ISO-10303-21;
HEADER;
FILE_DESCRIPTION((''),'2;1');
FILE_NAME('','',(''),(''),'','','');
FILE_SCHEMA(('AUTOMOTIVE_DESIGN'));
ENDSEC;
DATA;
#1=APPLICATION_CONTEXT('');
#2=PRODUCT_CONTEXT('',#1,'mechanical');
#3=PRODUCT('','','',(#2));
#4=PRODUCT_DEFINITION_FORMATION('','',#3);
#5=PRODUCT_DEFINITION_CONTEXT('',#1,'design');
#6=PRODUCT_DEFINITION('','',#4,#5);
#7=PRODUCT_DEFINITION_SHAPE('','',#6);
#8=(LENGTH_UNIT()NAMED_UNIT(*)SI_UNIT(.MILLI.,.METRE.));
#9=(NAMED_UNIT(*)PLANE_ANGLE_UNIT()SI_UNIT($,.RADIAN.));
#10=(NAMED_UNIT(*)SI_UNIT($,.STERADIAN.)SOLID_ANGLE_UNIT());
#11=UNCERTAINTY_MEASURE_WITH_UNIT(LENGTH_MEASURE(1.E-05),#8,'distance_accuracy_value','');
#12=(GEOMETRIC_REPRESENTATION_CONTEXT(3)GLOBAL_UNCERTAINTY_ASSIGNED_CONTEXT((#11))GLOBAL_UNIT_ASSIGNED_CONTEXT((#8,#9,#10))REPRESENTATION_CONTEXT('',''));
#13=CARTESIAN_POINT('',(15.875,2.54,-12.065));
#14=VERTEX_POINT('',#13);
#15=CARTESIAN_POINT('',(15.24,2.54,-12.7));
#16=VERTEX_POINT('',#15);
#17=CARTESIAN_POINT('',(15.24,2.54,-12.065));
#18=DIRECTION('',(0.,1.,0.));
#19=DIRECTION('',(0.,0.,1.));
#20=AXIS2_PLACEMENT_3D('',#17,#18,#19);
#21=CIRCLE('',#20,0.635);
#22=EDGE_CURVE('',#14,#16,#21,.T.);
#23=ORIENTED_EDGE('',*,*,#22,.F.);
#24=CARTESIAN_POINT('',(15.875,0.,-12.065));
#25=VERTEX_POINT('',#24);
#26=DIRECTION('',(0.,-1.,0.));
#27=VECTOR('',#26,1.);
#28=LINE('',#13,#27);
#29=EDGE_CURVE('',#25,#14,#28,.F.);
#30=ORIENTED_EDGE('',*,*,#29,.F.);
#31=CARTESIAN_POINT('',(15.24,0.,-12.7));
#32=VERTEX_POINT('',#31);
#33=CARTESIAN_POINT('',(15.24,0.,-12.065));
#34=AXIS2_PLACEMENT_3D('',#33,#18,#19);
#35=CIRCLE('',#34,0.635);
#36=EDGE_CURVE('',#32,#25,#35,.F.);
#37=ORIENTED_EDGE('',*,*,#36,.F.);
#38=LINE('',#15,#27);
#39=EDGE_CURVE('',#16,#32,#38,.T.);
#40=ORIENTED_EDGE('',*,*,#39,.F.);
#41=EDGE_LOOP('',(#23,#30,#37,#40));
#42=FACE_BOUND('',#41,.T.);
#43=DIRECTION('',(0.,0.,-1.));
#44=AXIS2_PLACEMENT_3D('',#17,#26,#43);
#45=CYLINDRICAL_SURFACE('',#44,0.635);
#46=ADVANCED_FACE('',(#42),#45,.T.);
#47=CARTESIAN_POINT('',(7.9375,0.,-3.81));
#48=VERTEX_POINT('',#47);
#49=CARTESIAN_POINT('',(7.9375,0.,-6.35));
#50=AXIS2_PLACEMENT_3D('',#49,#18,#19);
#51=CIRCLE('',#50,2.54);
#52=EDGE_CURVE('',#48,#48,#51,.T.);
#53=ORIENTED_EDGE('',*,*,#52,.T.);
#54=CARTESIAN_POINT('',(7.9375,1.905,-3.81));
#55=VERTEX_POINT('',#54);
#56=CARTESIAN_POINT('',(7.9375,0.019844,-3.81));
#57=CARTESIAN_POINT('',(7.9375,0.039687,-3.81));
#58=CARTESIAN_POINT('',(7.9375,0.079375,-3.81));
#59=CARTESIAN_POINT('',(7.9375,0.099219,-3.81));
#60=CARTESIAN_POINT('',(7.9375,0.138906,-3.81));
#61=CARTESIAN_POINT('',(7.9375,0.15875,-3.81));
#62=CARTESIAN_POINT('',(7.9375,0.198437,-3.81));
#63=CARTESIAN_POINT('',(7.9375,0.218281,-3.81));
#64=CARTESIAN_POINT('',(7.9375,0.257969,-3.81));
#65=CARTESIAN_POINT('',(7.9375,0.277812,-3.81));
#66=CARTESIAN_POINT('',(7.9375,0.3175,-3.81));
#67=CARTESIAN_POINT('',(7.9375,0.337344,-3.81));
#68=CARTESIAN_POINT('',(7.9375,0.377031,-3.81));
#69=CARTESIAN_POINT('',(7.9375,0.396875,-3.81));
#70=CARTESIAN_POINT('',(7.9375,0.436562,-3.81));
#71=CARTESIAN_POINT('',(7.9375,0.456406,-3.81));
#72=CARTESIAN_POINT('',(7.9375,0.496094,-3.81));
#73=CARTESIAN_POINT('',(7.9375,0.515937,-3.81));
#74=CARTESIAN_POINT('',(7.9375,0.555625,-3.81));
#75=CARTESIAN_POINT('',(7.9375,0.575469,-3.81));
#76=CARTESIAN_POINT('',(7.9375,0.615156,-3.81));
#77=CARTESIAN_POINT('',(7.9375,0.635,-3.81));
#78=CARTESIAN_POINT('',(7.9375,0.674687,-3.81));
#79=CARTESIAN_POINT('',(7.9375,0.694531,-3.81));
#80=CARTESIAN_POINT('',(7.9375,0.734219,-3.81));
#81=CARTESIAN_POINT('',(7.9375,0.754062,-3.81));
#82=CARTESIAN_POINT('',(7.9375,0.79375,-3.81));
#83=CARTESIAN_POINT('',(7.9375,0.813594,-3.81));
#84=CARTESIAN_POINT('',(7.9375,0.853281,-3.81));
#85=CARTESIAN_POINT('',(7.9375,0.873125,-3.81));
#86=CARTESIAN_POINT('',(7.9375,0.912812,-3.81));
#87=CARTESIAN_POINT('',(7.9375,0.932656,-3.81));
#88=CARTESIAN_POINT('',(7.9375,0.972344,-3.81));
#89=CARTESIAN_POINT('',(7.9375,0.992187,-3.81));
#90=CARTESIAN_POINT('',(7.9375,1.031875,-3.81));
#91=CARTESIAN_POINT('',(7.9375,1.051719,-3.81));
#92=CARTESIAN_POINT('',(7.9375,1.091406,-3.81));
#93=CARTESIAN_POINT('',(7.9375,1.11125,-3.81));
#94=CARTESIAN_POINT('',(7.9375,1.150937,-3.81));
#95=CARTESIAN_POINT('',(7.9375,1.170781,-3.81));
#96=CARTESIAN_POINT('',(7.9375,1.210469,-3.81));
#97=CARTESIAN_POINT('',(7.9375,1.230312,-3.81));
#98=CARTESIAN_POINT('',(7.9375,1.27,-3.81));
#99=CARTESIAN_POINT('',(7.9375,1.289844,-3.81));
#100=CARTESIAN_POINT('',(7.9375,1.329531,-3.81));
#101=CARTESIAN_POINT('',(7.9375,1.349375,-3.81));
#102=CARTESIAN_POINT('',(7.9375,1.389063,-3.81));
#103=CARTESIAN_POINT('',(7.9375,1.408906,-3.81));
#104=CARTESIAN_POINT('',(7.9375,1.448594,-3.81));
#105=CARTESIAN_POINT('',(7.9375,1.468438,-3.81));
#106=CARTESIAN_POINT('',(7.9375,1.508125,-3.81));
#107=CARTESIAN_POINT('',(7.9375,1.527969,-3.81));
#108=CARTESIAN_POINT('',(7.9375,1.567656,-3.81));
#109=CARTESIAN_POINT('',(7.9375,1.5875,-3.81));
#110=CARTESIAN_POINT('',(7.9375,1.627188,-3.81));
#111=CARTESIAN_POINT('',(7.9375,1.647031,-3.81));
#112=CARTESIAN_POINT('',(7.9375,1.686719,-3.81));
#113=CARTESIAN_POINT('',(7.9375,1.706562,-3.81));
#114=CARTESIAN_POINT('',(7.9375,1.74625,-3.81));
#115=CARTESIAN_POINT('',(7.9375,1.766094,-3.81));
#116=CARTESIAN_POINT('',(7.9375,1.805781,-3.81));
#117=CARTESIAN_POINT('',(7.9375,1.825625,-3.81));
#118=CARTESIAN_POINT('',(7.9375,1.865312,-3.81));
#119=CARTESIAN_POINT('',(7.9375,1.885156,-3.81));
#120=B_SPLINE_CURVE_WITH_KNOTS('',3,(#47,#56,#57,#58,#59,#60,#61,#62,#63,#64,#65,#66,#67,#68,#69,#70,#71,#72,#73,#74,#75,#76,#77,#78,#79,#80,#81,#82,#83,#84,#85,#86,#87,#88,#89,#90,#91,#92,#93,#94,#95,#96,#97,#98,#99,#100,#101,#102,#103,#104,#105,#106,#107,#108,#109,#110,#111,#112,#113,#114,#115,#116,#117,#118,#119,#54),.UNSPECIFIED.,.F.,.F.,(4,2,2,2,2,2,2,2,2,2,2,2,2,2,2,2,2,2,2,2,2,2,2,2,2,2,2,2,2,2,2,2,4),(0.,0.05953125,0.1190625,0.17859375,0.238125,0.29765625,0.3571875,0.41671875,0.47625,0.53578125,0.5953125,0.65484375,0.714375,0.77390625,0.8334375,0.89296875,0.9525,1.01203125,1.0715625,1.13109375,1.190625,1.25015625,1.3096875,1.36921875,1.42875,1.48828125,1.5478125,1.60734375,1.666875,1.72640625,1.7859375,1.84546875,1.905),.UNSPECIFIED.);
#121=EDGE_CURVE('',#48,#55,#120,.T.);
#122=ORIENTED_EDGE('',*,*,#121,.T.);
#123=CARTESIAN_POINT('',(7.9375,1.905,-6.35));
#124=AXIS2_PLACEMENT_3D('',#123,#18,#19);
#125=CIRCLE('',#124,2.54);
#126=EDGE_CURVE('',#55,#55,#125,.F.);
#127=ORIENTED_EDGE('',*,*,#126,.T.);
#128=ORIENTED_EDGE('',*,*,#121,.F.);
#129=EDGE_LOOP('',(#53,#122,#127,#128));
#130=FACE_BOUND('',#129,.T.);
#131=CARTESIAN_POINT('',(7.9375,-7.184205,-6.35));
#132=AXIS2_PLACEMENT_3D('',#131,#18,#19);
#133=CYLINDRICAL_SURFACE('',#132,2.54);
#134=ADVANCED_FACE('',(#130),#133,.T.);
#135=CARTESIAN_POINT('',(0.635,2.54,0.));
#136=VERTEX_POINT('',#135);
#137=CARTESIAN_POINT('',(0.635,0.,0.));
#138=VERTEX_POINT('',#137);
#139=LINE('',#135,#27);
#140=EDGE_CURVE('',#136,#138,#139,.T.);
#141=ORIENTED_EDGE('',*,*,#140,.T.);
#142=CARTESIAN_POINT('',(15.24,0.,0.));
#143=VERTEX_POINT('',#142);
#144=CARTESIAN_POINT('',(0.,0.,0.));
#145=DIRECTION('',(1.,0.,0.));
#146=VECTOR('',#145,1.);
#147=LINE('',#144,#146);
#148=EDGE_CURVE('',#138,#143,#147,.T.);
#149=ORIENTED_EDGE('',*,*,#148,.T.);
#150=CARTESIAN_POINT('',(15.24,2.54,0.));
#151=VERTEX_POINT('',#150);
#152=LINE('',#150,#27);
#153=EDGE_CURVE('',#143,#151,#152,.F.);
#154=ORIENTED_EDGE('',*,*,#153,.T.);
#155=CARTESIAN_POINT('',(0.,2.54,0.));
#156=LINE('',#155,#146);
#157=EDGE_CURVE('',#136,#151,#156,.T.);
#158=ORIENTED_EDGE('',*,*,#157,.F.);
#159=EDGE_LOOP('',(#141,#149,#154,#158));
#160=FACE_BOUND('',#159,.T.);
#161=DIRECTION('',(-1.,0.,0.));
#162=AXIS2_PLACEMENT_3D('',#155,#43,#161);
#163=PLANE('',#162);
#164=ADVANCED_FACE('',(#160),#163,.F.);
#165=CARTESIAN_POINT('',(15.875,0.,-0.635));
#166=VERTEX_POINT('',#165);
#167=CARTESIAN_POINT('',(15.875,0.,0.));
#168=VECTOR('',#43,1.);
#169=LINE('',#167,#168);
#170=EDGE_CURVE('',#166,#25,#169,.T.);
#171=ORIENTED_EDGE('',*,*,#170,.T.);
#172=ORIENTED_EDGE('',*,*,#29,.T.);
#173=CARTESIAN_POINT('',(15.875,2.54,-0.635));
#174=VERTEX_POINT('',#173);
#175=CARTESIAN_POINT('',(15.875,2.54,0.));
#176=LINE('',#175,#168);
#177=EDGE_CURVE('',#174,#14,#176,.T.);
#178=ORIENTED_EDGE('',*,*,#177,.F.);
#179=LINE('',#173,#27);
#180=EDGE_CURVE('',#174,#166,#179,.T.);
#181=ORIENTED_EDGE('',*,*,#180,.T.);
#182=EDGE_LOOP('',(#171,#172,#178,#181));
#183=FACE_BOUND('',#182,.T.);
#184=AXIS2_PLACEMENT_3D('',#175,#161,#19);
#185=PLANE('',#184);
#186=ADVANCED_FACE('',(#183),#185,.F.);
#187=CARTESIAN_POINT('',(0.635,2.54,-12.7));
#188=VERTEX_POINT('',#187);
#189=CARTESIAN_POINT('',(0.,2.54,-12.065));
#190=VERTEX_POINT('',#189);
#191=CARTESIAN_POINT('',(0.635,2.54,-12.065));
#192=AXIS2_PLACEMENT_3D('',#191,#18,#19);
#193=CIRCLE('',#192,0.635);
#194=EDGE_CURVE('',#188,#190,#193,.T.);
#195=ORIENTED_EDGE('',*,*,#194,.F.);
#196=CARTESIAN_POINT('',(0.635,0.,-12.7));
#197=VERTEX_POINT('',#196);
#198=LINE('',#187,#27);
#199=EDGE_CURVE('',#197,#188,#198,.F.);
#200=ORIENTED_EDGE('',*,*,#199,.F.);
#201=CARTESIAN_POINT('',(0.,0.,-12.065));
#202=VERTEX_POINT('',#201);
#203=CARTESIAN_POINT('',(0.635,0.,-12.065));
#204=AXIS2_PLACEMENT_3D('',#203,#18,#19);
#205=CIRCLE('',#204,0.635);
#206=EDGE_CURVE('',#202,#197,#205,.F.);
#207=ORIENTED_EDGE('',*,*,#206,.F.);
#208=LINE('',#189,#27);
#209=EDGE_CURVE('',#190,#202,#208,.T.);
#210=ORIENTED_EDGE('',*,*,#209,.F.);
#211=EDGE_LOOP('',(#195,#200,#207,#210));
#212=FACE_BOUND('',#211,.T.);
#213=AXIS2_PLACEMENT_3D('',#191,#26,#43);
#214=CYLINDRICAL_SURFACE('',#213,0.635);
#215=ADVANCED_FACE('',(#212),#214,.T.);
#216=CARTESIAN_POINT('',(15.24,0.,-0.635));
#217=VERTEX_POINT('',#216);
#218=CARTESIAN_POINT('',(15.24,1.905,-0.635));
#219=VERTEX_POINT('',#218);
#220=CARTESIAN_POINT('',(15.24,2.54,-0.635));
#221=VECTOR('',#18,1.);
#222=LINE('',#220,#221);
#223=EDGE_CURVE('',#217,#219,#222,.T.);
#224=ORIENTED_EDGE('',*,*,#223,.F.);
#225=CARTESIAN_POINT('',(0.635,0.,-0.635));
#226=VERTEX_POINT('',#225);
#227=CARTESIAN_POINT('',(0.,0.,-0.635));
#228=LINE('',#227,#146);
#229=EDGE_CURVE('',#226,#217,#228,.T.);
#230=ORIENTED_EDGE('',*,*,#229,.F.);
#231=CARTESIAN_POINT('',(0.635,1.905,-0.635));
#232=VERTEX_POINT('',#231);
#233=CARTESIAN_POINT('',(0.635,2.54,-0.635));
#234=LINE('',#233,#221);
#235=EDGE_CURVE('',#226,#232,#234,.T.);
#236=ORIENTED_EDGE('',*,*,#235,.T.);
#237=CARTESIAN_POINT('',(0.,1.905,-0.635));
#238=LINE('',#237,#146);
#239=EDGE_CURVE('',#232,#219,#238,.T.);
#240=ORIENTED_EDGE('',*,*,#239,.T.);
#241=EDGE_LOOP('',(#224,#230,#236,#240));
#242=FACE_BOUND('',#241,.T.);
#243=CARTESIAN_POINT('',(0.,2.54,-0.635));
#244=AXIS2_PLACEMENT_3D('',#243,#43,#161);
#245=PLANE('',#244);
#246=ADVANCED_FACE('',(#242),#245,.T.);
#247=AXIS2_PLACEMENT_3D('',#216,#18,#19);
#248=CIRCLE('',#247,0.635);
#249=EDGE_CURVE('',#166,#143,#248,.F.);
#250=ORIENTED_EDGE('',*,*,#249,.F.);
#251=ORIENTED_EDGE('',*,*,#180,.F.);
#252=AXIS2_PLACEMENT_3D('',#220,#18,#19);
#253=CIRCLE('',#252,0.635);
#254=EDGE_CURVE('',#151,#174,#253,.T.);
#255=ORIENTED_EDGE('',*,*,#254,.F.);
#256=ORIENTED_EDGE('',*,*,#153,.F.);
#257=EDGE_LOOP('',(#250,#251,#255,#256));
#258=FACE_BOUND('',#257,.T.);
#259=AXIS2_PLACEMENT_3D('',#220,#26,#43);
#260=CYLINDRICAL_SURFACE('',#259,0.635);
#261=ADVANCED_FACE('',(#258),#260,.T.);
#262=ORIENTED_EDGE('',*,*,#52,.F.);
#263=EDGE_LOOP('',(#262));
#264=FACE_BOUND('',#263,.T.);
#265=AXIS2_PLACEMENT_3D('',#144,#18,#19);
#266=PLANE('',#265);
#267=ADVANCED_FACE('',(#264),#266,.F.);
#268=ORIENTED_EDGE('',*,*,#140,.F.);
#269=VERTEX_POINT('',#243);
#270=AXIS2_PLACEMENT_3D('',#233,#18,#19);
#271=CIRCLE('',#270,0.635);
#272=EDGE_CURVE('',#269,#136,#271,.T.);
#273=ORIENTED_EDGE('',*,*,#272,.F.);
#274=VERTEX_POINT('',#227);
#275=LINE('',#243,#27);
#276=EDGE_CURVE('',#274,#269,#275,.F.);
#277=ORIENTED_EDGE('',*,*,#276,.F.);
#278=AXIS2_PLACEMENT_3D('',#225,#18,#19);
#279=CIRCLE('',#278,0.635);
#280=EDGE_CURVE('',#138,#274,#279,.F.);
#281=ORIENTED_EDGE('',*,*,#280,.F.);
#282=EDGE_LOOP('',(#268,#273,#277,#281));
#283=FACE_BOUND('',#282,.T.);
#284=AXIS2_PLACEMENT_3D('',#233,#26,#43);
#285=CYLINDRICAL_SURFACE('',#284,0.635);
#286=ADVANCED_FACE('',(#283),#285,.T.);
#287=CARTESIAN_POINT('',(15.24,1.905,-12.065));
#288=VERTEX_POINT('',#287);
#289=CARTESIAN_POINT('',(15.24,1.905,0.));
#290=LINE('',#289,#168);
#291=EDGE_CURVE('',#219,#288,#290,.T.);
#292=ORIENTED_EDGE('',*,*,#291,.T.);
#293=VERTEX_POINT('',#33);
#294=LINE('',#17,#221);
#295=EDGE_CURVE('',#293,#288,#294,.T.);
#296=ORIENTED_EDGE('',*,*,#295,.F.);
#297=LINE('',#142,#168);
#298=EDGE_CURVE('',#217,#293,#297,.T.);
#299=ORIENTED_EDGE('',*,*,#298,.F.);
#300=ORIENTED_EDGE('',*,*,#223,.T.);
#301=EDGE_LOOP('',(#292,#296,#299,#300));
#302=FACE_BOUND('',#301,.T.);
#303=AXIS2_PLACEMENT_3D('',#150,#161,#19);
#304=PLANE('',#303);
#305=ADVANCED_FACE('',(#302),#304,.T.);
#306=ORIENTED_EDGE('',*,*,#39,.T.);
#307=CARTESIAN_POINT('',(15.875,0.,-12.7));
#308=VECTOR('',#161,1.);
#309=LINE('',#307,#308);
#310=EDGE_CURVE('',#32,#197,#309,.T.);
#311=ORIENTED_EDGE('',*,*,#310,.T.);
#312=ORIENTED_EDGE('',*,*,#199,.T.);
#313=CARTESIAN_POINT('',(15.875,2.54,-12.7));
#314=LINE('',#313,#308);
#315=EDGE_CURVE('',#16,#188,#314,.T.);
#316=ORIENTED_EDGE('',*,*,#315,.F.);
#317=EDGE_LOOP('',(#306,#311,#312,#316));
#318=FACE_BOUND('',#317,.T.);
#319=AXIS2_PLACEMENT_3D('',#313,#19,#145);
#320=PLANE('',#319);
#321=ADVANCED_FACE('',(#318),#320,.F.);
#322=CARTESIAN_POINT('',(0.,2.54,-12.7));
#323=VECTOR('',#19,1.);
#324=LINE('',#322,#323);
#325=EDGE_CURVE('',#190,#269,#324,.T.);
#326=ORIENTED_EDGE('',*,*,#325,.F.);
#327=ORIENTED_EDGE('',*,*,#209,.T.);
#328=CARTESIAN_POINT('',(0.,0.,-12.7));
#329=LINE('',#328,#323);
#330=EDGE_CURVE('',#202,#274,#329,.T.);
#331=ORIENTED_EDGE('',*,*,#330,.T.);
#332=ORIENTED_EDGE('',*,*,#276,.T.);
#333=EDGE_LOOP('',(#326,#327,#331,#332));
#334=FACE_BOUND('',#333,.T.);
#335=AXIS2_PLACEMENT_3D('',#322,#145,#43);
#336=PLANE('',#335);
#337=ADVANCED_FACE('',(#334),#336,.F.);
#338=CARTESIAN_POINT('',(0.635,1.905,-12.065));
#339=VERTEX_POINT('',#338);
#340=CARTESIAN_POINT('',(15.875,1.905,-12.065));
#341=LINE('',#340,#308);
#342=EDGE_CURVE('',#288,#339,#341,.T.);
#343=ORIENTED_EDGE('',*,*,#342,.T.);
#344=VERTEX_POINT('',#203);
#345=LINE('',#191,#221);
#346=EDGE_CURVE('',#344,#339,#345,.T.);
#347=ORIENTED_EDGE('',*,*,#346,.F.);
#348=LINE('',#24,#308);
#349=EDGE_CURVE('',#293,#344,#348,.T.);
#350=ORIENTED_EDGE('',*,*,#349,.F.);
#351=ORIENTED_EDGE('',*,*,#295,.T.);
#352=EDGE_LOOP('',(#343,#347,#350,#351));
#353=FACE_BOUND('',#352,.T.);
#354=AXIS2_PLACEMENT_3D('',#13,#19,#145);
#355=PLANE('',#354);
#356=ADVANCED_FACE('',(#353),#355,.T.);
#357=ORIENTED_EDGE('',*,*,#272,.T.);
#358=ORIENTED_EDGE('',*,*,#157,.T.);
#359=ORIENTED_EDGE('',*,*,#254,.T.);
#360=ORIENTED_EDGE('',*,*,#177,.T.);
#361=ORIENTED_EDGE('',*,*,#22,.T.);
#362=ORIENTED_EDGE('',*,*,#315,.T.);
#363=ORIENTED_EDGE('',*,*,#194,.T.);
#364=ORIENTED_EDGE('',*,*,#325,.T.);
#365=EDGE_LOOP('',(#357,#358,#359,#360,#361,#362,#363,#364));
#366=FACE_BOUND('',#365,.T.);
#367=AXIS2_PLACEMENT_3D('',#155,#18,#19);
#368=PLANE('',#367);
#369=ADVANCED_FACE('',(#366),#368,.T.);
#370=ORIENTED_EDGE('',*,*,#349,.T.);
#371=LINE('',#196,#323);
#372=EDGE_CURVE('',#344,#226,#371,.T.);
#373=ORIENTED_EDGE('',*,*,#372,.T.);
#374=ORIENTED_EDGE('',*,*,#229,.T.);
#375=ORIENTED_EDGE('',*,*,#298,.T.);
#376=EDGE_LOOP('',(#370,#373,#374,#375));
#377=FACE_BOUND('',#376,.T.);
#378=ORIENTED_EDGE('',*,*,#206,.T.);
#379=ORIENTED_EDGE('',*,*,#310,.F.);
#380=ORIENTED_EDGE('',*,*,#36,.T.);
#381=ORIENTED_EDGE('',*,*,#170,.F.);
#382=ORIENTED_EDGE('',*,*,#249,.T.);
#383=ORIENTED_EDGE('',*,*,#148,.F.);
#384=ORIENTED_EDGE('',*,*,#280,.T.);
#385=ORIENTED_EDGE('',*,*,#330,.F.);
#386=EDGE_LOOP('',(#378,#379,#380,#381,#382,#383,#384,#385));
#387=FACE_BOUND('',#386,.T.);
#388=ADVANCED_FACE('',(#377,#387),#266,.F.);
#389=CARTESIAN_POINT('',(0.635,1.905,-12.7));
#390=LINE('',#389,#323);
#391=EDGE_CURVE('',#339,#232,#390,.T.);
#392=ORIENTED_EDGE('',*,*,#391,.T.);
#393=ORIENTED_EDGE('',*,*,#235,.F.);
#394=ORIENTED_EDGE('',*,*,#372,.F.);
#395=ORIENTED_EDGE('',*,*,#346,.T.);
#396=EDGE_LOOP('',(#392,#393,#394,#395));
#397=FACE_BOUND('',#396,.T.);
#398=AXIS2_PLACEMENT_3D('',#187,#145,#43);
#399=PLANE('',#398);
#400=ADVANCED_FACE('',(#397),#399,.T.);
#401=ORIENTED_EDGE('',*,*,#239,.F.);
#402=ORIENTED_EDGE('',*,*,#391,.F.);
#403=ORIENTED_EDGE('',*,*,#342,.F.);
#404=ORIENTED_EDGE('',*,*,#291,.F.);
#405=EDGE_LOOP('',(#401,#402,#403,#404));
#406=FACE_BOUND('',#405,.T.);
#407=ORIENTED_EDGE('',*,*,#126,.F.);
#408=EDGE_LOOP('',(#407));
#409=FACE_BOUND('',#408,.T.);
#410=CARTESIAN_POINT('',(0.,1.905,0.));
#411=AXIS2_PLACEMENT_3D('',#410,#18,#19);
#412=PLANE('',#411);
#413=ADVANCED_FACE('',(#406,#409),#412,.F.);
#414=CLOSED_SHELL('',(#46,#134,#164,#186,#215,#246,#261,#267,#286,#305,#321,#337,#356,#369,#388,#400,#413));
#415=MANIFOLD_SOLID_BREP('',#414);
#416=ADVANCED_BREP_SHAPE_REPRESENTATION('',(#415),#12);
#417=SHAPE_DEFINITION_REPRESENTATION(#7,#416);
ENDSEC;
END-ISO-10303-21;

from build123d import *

# Parameters (mm, degrees)
SKETCH1_W           = 15.875
SKETCH1_H           = 12.7
BOSS_EXTRUDE1_DEPTH = 2.54
FILLET1_R           = 0.635
SHELL1_START        = 0.635
SHELL1_OUTLINE_W    = 1.905
SHELL1_OUTLINE_H    = 11.43
SHELL1_DEPTH        = 14.605
SKETCH2_R           = 2.54
BOSS_EXTRUDE2_DEPTH = 1.905


# Read off the part's stored shape, not the designer's step: Shell1
with BuildPart() as part:
    # Sketch1 → Boss-Extrude1 (new body)
    with BuildSketch(Plane(origin=(0, 0, 0), x_dir=(1, 0, 0), z_dir=(0, 1, 0))):
        with Locations((7.9375, 6.35)):
            Rectangle(SKETCH1_W, SKETCH1_H)
    extrude(amount=BOSS_EXTRUDE1_DEPTH)

    # Fillet1
    fillet1_edges = [part.edges().sort_by_distance(p)[0] for p in [
        (0, 1.27, -12.7),
        (15.875, 1.27, -12.7),
        (15.875, 1.27, 0),
        (0, 1.27, 0),
    ]]
    fillet(fillet1_edges, radius=FILLET1_R)

    # Shell1 outline → Shell1 (cut)
    with BuildSketch(Plane.YZ.offset(SHELL1_START)):
        with Locations((0.9525, -6.35)):
            Rectangle(SHELL1_OUTLINE_W, SHELL1_OUTLINE_H)
    extrude(amount=SHELL1_DEPTH, mode=Mode.SUBTRACT)

    # Sketch2 → Boss-Extrude2 (add)
    with BuildSketch(Plane(origin=(0, 1.905, 0), x_dir=(-1, 0, 0), z_dir=(0, -1, 0))):
        with Locations(Location((-7.9375, 6.35, 0), (0, 0, 270))):
            Circle(SKETCH2_R)
    extrude(amount=BOSS_EXTRUDE2_DEPTH)


solid = part.part
